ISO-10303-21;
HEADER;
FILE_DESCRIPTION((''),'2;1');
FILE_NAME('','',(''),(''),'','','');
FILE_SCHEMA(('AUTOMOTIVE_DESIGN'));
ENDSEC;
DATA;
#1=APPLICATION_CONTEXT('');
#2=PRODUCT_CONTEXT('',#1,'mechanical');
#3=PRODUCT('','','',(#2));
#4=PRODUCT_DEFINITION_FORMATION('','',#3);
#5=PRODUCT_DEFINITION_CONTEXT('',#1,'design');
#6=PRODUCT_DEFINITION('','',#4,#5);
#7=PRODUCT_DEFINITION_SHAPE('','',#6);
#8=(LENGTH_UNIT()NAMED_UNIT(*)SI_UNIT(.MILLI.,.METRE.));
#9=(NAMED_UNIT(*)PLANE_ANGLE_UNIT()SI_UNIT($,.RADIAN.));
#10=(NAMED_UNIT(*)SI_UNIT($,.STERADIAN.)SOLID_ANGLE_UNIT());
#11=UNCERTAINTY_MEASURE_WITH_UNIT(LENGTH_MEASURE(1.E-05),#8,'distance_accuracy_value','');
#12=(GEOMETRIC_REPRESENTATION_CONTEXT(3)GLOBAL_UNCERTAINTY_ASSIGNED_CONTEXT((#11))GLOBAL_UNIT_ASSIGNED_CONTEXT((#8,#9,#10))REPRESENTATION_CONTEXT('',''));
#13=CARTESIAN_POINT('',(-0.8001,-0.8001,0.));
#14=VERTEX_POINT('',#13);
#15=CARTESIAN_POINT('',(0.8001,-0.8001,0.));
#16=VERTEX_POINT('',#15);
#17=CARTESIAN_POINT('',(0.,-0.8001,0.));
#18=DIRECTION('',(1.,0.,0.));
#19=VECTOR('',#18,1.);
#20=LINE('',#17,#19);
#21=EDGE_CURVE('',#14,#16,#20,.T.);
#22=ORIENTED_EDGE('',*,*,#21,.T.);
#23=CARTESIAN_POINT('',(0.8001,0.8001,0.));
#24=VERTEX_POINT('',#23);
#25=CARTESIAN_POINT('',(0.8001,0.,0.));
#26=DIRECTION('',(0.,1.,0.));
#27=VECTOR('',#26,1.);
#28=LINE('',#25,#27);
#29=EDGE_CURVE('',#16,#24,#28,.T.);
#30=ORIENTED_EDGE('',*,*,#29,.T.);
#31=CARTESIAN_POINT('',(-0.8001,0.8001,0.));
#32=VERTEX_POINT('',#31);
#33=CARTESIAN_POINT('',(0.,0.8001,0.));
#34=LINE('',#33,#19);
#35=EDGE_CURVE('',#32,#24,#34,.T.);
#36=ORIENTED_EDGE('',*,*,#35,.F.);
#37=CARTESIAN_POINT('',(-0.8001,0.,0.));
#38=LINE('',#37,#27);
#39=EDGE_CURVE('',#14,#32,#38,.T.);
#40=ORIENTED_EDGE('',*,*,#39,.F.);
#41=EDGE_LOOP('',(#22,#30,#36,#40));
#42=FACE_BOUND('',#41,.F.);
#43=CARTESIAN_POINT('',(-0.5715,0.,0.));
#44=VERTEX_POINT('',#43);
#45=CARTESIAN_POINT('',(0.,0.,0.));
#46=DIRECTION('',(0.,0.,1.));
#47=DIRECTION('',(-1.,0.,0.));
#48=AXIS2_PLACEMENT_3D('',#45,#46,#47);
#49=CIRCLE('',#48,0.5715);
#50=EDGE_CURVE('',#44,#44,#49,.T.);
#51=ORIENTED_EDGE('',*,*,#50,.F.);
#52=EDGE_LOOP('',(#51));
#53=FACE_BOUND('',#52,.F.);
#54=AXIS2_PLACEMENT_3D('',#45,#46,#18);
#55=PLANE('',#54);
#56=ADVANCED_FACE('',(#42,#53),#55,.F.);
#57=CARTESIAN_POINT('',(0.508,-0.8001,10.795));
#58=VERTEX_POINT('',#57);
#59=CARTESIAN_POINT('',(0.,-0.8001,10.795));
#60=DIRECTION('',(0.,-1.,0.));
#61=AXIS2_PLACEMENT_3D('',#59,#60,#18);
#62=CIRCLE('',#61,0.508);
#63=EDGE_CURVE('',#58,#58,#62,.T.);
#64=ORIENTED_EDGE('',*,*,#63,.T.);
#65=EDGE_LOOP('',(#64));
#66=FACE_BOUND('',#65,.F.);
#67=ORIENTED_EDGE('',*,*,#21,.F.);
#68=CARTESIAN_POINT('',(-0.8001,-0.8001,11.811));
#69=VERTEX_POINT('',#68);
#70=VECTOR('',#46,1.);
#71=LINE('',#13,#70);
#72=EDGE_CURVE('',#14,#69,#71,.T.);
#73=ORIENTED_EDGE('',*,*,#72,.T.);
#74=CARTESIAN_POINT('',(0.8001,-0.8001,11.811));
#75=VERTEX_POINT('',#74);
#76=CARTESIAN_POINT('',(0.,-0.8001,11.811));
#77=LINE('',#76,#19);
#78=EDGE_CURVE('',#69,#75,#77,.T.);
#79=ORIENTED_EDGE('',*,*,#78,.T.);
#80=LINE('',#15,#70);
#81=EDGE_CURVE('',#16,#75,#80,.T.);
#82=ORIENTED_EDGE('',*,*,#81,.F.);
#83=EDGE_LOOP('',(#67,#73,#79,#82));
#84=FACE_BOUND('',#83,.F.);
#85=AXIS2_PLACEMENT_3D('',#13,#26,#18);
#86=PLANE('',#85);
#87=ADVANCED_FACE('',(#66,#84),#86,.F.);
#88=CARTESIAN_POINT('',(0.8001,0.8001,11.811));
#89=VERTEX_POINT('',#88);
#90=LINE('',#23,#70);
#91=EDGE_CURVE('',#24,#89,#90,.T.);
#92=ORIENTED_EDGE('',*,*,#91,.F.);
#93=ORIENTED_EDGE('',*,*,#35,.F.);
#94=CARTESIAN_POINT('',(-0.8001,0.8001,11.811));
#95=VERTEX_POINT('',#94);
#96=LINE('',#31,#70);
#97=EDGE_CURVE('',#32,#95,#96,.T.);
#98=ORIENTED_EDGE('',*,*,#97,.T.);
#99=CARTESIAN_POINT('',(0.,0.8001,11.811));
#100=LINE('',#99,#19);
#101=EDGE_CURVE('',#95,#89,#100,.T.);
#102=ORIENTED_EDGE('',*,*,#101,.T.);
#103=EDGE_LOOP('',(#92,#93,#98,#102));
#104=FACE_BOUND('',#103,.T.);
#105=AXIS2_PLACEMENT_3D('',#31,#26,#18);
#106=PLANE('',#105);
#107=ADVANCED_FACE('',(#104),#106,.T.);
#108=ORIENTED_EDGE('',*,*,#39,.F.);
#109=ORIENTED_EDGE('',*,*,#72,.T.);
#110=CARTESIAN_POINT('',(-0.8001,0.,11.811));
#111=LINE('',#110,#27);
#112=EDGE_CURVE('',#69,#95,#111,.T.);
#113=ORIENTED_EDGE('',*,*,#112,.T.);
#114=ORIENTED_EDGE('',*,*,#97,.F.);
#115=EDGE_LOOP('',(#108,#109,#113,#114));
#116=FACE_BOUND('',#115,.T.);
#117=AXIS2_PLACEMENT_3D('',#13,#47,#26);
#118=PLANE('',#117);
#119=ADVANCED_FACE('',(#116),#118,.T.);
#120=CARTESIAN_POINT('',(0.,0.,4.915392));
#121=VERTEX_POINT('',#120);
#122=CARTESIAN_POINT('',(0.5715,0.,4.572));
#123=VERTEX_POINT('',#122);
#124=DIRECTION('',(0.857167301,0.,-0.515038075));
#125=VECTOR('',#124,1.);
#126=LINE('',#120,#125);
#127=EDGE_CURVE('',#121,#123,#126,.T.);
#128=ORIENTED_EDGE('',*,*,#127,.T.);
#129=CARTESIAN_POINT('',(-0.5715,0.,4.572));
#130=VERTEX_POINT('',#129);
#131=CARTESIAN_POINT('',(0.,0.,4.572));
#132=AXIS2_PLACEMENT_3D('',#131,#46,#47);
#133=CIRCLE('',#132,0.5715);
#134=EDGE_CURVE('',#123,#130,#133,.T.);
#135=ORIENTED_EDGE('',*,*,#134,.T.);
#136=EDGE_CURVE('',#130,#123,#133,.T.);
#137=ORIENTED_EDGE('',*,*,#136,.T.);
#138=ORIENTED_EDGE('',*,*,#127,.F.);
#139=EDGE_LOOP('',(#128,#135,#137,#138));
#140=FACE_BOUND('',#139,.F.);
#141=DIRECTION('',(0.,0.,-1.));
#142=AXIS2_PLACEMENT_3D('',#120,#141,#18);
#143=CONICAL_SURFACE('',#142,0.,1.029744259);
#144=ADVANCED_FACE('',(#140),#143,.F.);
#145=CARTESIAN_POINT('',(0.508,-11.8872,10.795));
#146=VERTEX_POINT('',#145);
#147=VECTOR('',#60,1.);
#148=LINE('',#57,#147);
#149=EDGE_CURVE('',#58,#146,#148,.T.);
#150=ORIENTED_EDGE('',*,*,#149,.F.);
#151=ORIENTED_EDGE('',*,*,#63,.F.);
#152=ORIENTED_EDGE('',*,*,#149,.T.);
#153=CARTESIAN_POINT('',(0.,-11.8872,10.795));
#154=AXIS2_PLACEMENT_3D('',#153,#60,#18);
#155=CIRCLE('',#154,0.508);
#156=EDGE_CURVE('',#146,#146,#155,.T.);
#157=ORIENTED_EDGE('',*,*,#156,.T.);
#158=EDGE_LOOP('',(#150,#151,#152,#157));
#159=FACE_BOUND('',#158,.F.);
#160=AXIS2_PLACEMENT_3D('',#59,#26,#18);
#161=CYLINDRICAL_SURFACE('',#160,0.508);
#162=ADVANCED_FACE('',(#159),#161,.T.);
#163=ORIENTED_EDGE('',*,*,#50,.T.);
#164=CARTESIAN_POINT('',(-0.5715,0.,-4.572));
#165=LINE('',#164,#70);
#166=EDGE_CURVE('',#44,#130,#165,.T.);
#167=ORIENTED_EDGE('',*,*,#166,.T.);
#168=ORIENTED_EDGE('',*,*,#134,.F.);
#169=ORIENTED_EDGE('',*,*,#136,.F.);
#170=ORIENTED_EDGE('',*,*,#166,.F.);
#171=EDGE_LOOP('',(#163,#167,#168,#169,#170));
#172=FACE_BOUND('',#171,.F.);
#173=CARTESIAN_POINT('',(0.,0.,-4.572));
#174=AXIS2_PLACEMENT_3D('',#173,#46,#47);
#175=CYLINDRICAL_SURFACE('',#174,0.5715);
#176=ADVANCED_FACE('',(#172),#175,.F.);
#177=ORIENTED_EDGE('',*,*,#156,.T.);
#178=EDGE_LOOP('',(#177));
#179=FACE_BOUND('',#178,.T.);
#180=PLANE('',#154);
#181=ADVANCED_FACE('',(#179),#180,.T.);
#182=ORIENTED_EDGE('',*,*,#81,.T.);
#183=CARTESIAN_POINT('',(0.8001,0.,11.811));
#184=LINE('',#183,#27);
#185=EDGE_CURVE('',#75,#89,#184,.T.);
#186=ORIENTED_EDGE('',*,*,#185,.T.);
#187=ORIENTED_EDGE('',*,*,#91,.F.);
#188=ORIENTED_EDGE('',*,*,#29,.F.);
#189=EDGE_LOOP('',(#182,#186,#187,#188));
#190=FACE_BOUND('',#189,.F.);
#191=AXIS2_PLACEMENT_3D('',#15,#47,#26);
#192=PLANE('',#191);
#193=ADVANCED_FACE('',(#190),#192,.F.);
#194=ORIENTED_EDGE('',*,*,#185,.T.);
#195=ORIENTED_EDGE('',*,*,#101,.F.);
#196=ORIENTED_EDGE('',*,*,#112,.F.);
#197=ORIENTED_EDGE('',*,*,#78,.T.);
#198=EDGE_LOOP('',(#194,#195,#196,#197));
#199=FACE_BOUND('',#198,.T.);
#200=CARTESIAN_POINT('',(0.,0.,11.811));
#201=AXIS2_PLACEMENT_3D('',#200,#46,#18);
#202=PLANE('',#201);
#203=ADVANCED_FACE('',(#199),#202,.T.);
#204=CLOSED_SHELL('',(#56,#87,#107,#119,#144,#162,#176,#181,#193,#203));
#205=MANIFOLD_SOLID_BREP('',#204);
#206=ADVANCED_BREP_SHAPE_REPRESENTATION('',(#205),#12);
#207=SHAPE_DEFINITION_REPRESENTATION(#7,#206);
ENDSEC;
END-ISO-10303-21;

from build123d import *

# Parameters (mm, degrees)
F0_W     = 1.6002
F0_H     = 1.6002
F1_DEPTH = 11.811
F2_R     = 0.508
F3_DEPTH = 11.0871
F5_D     = 1.143
F5_DEPTH = 4.572
F5_TIP   = 0.3433918438


with BuildPart() as f1:
    # F0 (on Top) → F1 (new body)
    with BuildSketch(Plane.XY):
        Rectangle(F0_W, F0_H)
    extrude(amount=F1_DEPTH)

    # F2 (on face) → F3 (join)
    with BuildSketch(Plane.XZ.offset(0.8001)):
        with Locations((0, 10.795)):
            Circle(F2_R)
    extrude(amount=F3_DEPTH)

    # F5
    with Locations(Plane(origin=(0, 0, 0), x_dir=(1, 0, 0), z_dir=(0, 0, -1))):
        with Locations((0, 0)):
            Hole(F5_D / 2, depth=F5_DEPTH)
            with Locations((0, 0, -(F5_DEPTH + F5_TIP / 2))):  # 118° drill point
                Cone(0, F5_D / 2, F5_TIP, mode=Mode.SUBTRACT)


solid = f1.part
